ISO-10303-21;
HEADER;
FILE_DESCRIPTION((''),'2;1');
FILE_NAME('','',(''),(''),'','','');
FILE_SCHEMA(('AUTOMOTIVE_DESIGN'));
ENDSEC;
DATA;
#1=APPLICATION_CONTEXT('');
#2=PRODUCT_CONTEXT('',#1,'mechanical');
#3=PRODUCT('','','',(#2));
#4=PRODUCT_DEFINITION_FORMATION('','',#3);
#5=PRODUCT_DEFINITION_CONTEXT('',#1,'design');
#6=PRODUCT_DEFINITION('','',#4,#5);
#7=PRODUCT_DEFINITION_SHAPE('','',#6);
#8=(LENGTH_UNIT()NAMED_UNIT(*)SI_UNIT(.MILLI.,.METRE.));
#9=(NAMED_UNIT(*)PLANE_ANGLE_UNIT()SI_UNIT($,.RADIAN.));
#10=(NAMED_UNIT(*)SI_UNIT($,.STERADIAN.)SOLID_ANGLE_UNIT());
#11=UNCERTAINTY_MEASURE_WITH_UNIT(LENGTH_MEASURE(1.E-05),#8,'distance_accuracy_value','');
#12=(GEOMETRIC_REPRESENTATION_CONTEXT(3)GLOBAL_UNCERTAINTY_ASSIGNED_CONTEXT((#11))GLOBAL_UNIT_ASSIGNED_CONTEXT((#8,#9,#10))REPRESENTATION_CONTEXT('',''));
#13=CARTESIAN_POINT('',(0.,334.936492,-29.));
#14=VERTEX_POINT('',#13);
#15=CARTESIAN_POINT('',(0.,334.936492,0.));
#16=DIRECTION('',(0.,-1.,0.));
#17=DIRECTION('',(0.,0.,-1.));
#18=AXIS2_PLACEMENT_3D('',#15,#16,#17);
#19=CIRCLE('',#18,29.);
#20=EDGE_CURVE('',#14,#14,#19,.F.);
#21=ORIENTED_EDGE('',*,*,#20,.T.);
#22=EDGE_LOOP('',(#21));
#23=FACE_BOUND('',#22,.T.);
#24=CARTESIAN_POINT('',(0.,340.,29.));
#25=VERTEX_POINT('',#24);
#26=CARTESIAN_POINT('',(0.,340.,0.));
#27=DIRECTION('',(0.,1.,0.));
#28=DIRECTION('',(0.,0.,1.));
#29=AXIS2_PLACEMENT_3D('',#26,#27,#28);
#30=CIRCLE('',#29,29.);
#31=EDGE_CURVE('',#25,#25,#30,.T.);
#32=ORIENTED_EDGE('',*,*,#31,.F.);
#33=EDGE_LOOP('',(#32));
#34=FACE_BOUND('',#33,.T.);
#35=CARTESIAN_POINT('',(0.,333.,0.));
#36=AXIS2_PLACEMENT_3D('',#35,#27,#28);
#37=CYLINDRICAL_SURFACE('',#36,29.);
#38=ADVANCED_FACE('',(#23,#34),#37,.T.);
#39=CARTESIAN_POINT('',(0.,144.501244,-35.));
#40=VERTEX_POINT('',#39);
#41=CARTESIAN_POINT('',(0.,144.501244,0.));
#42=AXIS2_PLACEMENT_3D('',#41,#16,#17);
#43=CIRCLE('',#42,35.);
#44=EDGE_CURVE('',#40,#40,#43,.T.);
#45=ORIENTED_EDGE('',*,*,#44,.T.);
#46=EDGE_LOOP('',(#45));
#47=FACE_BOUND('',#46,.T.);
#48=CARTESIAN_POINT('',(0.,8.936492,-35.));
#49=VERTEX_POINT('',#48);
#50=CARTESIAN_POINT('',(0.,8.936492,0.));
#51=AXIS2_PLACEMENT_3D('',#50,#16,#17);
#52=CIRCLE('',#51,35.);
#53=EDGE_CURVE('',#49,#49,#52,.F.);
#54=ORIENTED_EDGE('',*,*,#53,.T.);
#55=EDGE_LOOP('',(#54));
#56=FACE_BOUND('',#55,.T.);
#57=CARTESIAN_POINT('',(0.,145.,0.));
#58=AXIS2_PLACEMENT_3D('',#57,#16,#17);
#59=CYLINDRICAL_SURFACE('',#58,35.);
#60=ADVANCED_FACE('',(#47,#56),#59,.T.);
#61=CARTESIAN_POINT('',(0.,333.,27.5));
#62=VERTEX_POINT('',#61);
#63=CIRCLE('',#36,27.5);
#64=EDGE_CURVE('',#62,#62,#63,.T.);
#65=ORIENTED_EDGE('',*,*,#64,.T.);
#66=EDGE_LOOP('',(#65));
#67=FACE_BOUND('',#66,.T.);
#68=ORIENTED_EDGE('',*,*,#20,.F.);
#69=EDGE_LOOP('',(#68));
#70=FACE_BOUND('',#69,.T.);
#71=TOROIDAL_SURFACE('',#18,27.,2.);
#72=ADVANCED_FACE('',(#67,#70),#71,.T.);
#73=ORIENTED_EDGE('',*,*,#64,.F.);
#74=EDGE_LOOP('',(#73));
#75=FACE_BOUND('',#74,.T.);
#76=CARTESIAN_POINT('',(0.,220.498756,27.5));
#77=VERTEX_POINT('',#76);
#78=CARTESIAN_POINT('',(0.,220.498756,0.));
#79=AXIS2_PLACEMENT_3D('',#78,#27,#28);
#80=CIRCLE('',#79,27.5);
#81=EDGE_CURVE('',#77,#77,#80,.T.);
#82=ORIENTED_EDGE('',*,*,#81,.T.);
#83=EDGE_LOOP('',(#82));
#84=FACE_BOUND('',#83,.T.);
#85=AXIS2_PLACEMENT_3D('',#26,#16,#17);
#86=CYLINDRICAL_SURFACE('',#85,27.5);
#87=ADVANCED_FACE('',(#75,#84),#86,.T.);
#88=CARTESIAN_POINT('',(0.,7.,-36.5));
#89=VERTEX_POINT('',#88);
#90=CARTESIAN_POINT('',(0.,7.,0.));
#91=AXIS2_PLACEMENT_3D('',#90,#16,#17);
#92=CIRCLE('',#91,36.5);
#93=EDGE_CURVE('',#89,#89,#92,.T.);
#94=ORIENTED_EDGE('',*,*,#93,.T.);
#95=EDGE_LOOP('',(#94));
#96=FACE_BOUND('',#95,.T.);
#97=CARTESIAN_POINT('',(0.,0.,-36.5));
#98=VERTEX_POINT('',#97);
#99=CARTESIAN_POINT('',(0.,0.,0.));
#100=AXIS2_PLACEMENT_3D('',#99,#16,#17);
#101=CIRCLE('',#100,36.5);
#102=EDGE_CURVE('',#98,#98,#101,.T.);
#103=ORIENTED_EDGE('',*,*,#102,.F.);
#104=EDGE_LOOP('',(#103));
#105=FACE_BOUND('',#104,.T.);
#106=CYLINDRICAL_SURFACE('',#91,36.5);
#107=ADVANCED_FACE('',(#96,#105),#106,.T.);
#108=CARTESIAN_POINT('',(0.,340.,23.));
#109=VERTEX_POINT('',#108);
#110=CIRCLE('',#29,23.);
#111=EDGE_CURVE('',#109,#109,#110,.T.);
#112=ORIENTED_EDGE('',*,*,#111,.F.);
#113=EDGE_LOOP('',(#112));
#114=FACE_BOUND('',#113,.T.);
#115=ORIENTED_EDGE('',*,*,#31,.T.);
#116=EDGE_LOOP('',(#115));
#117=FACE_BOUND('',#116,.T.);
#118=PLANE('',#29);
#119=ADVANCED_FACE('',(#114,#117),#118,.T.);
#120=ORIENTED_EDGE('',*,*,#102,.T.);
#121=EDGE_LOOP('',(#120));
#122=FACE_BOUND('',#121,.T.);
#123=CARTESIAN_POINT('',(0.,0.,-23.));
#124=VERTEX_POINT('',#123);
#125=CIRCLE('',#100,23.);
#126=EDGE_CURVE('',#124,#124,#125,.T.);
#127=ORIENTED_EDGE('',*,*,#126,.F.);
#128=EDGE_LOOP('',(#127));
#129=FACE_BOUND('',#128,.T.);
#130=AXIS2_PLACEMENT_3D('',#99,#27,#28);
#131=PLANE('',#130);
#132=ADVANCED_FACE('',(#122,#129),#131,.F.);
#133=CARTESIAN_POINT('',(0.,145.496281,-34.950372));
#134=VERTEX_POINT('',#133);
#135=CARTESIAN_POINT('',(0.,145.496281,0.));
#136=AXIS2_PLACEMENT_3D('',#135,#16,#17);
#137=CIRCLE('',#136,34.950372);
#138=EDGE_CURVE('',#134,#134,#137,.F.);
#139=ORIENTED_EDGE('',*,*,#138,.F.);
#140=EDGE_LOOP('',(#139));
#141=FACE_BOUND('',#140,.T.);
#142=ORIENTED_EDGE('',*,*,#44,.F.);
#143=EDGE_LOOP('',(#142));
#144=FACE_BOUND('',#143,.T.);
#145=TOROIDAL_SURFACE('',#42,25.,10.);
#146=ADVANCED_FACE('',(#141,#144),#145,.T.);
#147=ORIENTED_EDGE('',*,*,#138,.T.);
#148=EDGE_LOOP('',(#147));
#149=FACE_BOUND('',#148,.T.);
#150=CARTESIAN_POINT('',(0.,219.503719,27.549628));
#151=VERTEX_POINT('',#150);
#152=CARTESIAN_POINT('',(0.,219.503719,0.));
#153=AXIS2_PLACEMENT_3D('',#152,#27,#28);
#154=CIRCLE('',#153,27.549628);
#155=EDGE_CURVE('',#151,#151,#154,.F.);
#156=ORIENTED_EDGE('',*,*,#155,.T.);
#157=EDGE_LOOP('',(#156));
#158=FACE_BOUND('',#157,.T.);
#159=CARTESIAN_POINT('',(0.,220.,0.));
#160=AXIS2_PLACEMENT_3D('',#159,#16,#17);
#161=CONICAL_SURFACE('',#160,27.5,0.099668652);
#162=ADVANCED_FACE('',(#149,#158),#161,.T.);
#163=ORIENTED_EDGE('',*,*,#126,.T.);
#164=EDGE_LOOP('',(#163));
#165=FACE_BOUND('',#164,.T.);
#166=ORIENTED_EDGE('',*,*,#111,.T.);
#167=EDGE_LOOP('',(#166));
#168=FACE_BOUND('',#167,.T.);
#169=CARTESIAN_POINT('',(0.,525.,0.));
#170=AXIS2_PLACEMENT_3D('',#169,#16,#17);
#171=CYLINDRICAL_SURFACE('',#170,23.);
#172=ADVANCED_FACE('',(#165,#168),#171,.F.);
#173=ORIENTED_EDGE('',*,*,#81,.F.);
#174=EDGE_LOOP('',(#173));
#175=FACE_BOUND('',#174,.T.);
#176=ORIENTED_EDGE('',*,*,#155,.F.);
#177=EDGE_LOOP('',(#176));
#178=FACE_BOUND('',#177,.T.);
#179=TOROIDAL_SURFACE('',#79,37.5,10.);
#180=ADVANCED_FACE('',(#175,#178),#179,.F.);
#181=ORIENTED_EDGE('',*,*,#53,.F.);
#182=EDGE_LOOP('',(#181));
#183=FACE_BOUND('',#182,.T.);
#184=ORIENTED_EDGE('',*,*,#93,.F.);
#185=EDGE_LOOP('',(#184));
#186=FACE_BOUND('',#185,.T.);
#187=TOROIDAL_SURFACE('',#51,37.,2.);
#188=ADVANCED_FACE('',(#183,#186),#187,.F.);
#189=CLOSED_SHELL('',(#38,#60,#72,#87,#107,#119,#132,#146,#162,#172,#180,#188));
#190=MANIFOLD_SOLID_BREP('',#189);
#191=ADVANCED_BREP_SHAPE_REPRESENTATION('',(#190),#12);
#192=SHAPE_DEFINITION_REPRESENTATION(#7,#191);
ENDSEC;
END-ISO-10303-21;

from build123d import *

# Parameters (mm, degrees)
CROQUIS1_R              = 35
SALIENTE_EXTRUIR1_DEPTH = 145
CROQUIS2_R              = 27.5
CROQUIS3_R              = 27.5
SALIENTE_EXTRUIR2_DEPTH = 120
CROQUIS5_R              = 36.5
SALIENTE_EXTRUIR3_DEPTH = 7
CROQUIS4_R              = 23
CORTAR_EXTRUIR1_DEPTH   = 525
REDONDEO1_R             = 10
SALIENTE_EXTRUIR4_START = -7
CROQUIS6_R              = 29
CROQUIS6_R_2            = 23
SALIENTE_EXTRUIR4_DEPTH = 7
REDONDEO2_R             = 2


with BuildPart() as part:
    # Croquis1 → Saliente-Extruir1 (new body)
    with BuildSketch(Plane(origin=(0, 0, 0), x_dir=(1, 0, 0), z_dir=(0, 1, 0))):
        with Locations(Location((0, 0, 0), (0, 0, 270))):
            Circle(CROQUIS1_R)
    extrude(amount=SALIENTE_EXTRUIR1_DEPTH)

    # Croquis2 → section 1 of recubrir1
    with BuildSketch(Plane(origin=(0, 220, 0), x_dir=(1, 0, 0), z_dir=(0, 1, 0)), mode=Mode.PRIVATE) as recubrir1_s1:
        Circle(CROQUIS2_R)
    # loft up to a face of the part (recubrir1)
    loft([Face(Wire([part.edges().sort_by_distance((25.51390196, 145, -23.959148708))[0]])), recubrir1_s1.sketch])

    # Croquis3 → Saliente-Extruir2 (add)
    with BuildSketch(Plane(origin=(0, 220, 0), x_dir=(1, 0, 0), z_dir=(0, 1, 0))):
        with Locations(Location((0, 0, 0), (0, 0, 270))):
            Circle(CROQUIS3_R)
    extrude(amount=SALIENTE_EXTRUIR2_DEPTH)

    # Croquis5 → Saliente-Extruir3 (add)
    with BuildSketch(Plane.XZ):
        with Locations(Location((0, 0, 0), (0, 0, 270))):
            Circle(CROQUIS5_R)
    extrude(amount=-SALIENTE_EXTRUIR3_DEPTH)

    # Croquis4 → Cortar-Extruir1 (cut)
    with BuildSketch(Plane.XZ):
        with Locations(Location((0, 0, 0), (0, 0, 270))):
            Circle(CROQUIS4_R)
    extrude(amount=-CORTAR_EXTRUIR1_DEPTH, mode=Mode.SUBTRACT)

    # Redondeo1
    # the kernel refuses this fillet: 10 mm, written as the material it adds along each edge
    with BuildSketch(Plane(origin=(0, 220, 0), x_dir=(0, 0, 1), z_dir=(1, 0, 0))) as redondeo1_piece_1:
        with BuildLine():
            CenterArc((27.5 + REDONDEO1_R, -REDONDEO1_R * 0.0498756211209), REDONDEO1_R, 174.289406863, 5.710593137)
            Line((27.5 + REDONDEO1_R * 0.00496280979001, REDONDEO1_R * 0.0496280979001), (27.5, 0))
            Line((27.5, 0), (27.5, -REDONDEO1_R * 0.0498756211209))
        make_face()
    revolve(axis=Axis((0, 220, 0), (0, -1, 0)))
    # the kernel refuses this fillet: 10 mm, written as the material it takes off along each edge
    with BuildSketch(Plane(origin=(0, 145, 0), x_dir=(0, 0, 1), z_dir=(-1, 0, 0))) as redondeo1_2_piece_1:
        with BuildLine():
            CenterArc((35 - REDONDEO1_R, -REDONDEO1_R * 0.0498756211209), REDONDEO1_R, 0, 5.710593137)
            Line((35 - REDONDEO1_R * 0.00496280979001, REDONDEO1_R * 0.0496280979001), (35, 0))
            Line((35, 0), (35, -REDONDEO1_R * 0.0498756211209))
        make_face()
    revolve(axis=Axis((0, 145, 0), (0, 1, 0)), mode=Mode.SUBTRACT)

    # Croquis6 → Saliente-Extruir4 (add)
    with BuildSketch(Plane(origin=(0, 340, 0), x_dir=(1, 0, 0), z_dir=(0, 1, 0)).offset(SALIENTE_EXTRUIR4_START)):
        with Locations(Location((0, 0, 0), (0, 0, 270))):
            Circle(CROQUIS6_R)
        with Locations(Location((0, 0, 0), (0, 0, 90))):
            Circle(CROQUIS6_R_2, mode=Mode.SUBTRACT)
    extrude(amount=SALIENTE_EXTRUIR4_DEPTH)

    # Redondeo2
    # the kernel refuses this fillet: 2 mm, written as the material it adds along each edge
    with BuildSketch(Plane(origin=(0, 7, 0), x_dir=(0, 0, 1), z_dir=(1, 0, 0))) as redondeo2_piece_1:
        with BuildLine():
            CenterArc((37, -1.936491673), REDONDEO2_R, 104.477512186, 75.522487814)
            Line((35, -1.936491673), (34.96, -1.936491673))
            Line((34.96, -1.936491673), (34.96, 0))
            Line((34.96, 0), (35, 0.04))
            ThreePointArc((35, 0.04), (35.75, 0.04), (36.49, 0.038729833))
            Line((36.49, 0.038729833), (36.5, 0))
        make_face()
    revolve(axis=Axis((0, 7, 0), (0, -1, 0)))
    # the kernel refuses this fillet: 2 mm, written as the material it takes off along each edge
    with BuildSketch(Plane(origin=(0, 333, 0), x_dir=(0, 0, 1), z_dir=(-1, 0, 0))) as redondeo2_2_piece_1:
        with BuildLine():
            CenterArc((27, 1.936491673), REDONDEO2_R, 284.477512186, 75.522487814)
            Line((29, 1.936491673), (29.04, 1.936491673))
            Line((29.04, 1.936491673), (29.04, 0))
            Line((29.04, 0), (29, -0.04))
            ThreePointArc((29, -0.04), (28.25, -0.04), (27.51, -0.038729833))
            Line((27.51, -0.038729833), (27.5, 0))
        make_face()
    revolve(axis=Axis((0, 333, 0), (0, 1, 0)), mode=Mode.SUBTRACT)


solid = part.part
